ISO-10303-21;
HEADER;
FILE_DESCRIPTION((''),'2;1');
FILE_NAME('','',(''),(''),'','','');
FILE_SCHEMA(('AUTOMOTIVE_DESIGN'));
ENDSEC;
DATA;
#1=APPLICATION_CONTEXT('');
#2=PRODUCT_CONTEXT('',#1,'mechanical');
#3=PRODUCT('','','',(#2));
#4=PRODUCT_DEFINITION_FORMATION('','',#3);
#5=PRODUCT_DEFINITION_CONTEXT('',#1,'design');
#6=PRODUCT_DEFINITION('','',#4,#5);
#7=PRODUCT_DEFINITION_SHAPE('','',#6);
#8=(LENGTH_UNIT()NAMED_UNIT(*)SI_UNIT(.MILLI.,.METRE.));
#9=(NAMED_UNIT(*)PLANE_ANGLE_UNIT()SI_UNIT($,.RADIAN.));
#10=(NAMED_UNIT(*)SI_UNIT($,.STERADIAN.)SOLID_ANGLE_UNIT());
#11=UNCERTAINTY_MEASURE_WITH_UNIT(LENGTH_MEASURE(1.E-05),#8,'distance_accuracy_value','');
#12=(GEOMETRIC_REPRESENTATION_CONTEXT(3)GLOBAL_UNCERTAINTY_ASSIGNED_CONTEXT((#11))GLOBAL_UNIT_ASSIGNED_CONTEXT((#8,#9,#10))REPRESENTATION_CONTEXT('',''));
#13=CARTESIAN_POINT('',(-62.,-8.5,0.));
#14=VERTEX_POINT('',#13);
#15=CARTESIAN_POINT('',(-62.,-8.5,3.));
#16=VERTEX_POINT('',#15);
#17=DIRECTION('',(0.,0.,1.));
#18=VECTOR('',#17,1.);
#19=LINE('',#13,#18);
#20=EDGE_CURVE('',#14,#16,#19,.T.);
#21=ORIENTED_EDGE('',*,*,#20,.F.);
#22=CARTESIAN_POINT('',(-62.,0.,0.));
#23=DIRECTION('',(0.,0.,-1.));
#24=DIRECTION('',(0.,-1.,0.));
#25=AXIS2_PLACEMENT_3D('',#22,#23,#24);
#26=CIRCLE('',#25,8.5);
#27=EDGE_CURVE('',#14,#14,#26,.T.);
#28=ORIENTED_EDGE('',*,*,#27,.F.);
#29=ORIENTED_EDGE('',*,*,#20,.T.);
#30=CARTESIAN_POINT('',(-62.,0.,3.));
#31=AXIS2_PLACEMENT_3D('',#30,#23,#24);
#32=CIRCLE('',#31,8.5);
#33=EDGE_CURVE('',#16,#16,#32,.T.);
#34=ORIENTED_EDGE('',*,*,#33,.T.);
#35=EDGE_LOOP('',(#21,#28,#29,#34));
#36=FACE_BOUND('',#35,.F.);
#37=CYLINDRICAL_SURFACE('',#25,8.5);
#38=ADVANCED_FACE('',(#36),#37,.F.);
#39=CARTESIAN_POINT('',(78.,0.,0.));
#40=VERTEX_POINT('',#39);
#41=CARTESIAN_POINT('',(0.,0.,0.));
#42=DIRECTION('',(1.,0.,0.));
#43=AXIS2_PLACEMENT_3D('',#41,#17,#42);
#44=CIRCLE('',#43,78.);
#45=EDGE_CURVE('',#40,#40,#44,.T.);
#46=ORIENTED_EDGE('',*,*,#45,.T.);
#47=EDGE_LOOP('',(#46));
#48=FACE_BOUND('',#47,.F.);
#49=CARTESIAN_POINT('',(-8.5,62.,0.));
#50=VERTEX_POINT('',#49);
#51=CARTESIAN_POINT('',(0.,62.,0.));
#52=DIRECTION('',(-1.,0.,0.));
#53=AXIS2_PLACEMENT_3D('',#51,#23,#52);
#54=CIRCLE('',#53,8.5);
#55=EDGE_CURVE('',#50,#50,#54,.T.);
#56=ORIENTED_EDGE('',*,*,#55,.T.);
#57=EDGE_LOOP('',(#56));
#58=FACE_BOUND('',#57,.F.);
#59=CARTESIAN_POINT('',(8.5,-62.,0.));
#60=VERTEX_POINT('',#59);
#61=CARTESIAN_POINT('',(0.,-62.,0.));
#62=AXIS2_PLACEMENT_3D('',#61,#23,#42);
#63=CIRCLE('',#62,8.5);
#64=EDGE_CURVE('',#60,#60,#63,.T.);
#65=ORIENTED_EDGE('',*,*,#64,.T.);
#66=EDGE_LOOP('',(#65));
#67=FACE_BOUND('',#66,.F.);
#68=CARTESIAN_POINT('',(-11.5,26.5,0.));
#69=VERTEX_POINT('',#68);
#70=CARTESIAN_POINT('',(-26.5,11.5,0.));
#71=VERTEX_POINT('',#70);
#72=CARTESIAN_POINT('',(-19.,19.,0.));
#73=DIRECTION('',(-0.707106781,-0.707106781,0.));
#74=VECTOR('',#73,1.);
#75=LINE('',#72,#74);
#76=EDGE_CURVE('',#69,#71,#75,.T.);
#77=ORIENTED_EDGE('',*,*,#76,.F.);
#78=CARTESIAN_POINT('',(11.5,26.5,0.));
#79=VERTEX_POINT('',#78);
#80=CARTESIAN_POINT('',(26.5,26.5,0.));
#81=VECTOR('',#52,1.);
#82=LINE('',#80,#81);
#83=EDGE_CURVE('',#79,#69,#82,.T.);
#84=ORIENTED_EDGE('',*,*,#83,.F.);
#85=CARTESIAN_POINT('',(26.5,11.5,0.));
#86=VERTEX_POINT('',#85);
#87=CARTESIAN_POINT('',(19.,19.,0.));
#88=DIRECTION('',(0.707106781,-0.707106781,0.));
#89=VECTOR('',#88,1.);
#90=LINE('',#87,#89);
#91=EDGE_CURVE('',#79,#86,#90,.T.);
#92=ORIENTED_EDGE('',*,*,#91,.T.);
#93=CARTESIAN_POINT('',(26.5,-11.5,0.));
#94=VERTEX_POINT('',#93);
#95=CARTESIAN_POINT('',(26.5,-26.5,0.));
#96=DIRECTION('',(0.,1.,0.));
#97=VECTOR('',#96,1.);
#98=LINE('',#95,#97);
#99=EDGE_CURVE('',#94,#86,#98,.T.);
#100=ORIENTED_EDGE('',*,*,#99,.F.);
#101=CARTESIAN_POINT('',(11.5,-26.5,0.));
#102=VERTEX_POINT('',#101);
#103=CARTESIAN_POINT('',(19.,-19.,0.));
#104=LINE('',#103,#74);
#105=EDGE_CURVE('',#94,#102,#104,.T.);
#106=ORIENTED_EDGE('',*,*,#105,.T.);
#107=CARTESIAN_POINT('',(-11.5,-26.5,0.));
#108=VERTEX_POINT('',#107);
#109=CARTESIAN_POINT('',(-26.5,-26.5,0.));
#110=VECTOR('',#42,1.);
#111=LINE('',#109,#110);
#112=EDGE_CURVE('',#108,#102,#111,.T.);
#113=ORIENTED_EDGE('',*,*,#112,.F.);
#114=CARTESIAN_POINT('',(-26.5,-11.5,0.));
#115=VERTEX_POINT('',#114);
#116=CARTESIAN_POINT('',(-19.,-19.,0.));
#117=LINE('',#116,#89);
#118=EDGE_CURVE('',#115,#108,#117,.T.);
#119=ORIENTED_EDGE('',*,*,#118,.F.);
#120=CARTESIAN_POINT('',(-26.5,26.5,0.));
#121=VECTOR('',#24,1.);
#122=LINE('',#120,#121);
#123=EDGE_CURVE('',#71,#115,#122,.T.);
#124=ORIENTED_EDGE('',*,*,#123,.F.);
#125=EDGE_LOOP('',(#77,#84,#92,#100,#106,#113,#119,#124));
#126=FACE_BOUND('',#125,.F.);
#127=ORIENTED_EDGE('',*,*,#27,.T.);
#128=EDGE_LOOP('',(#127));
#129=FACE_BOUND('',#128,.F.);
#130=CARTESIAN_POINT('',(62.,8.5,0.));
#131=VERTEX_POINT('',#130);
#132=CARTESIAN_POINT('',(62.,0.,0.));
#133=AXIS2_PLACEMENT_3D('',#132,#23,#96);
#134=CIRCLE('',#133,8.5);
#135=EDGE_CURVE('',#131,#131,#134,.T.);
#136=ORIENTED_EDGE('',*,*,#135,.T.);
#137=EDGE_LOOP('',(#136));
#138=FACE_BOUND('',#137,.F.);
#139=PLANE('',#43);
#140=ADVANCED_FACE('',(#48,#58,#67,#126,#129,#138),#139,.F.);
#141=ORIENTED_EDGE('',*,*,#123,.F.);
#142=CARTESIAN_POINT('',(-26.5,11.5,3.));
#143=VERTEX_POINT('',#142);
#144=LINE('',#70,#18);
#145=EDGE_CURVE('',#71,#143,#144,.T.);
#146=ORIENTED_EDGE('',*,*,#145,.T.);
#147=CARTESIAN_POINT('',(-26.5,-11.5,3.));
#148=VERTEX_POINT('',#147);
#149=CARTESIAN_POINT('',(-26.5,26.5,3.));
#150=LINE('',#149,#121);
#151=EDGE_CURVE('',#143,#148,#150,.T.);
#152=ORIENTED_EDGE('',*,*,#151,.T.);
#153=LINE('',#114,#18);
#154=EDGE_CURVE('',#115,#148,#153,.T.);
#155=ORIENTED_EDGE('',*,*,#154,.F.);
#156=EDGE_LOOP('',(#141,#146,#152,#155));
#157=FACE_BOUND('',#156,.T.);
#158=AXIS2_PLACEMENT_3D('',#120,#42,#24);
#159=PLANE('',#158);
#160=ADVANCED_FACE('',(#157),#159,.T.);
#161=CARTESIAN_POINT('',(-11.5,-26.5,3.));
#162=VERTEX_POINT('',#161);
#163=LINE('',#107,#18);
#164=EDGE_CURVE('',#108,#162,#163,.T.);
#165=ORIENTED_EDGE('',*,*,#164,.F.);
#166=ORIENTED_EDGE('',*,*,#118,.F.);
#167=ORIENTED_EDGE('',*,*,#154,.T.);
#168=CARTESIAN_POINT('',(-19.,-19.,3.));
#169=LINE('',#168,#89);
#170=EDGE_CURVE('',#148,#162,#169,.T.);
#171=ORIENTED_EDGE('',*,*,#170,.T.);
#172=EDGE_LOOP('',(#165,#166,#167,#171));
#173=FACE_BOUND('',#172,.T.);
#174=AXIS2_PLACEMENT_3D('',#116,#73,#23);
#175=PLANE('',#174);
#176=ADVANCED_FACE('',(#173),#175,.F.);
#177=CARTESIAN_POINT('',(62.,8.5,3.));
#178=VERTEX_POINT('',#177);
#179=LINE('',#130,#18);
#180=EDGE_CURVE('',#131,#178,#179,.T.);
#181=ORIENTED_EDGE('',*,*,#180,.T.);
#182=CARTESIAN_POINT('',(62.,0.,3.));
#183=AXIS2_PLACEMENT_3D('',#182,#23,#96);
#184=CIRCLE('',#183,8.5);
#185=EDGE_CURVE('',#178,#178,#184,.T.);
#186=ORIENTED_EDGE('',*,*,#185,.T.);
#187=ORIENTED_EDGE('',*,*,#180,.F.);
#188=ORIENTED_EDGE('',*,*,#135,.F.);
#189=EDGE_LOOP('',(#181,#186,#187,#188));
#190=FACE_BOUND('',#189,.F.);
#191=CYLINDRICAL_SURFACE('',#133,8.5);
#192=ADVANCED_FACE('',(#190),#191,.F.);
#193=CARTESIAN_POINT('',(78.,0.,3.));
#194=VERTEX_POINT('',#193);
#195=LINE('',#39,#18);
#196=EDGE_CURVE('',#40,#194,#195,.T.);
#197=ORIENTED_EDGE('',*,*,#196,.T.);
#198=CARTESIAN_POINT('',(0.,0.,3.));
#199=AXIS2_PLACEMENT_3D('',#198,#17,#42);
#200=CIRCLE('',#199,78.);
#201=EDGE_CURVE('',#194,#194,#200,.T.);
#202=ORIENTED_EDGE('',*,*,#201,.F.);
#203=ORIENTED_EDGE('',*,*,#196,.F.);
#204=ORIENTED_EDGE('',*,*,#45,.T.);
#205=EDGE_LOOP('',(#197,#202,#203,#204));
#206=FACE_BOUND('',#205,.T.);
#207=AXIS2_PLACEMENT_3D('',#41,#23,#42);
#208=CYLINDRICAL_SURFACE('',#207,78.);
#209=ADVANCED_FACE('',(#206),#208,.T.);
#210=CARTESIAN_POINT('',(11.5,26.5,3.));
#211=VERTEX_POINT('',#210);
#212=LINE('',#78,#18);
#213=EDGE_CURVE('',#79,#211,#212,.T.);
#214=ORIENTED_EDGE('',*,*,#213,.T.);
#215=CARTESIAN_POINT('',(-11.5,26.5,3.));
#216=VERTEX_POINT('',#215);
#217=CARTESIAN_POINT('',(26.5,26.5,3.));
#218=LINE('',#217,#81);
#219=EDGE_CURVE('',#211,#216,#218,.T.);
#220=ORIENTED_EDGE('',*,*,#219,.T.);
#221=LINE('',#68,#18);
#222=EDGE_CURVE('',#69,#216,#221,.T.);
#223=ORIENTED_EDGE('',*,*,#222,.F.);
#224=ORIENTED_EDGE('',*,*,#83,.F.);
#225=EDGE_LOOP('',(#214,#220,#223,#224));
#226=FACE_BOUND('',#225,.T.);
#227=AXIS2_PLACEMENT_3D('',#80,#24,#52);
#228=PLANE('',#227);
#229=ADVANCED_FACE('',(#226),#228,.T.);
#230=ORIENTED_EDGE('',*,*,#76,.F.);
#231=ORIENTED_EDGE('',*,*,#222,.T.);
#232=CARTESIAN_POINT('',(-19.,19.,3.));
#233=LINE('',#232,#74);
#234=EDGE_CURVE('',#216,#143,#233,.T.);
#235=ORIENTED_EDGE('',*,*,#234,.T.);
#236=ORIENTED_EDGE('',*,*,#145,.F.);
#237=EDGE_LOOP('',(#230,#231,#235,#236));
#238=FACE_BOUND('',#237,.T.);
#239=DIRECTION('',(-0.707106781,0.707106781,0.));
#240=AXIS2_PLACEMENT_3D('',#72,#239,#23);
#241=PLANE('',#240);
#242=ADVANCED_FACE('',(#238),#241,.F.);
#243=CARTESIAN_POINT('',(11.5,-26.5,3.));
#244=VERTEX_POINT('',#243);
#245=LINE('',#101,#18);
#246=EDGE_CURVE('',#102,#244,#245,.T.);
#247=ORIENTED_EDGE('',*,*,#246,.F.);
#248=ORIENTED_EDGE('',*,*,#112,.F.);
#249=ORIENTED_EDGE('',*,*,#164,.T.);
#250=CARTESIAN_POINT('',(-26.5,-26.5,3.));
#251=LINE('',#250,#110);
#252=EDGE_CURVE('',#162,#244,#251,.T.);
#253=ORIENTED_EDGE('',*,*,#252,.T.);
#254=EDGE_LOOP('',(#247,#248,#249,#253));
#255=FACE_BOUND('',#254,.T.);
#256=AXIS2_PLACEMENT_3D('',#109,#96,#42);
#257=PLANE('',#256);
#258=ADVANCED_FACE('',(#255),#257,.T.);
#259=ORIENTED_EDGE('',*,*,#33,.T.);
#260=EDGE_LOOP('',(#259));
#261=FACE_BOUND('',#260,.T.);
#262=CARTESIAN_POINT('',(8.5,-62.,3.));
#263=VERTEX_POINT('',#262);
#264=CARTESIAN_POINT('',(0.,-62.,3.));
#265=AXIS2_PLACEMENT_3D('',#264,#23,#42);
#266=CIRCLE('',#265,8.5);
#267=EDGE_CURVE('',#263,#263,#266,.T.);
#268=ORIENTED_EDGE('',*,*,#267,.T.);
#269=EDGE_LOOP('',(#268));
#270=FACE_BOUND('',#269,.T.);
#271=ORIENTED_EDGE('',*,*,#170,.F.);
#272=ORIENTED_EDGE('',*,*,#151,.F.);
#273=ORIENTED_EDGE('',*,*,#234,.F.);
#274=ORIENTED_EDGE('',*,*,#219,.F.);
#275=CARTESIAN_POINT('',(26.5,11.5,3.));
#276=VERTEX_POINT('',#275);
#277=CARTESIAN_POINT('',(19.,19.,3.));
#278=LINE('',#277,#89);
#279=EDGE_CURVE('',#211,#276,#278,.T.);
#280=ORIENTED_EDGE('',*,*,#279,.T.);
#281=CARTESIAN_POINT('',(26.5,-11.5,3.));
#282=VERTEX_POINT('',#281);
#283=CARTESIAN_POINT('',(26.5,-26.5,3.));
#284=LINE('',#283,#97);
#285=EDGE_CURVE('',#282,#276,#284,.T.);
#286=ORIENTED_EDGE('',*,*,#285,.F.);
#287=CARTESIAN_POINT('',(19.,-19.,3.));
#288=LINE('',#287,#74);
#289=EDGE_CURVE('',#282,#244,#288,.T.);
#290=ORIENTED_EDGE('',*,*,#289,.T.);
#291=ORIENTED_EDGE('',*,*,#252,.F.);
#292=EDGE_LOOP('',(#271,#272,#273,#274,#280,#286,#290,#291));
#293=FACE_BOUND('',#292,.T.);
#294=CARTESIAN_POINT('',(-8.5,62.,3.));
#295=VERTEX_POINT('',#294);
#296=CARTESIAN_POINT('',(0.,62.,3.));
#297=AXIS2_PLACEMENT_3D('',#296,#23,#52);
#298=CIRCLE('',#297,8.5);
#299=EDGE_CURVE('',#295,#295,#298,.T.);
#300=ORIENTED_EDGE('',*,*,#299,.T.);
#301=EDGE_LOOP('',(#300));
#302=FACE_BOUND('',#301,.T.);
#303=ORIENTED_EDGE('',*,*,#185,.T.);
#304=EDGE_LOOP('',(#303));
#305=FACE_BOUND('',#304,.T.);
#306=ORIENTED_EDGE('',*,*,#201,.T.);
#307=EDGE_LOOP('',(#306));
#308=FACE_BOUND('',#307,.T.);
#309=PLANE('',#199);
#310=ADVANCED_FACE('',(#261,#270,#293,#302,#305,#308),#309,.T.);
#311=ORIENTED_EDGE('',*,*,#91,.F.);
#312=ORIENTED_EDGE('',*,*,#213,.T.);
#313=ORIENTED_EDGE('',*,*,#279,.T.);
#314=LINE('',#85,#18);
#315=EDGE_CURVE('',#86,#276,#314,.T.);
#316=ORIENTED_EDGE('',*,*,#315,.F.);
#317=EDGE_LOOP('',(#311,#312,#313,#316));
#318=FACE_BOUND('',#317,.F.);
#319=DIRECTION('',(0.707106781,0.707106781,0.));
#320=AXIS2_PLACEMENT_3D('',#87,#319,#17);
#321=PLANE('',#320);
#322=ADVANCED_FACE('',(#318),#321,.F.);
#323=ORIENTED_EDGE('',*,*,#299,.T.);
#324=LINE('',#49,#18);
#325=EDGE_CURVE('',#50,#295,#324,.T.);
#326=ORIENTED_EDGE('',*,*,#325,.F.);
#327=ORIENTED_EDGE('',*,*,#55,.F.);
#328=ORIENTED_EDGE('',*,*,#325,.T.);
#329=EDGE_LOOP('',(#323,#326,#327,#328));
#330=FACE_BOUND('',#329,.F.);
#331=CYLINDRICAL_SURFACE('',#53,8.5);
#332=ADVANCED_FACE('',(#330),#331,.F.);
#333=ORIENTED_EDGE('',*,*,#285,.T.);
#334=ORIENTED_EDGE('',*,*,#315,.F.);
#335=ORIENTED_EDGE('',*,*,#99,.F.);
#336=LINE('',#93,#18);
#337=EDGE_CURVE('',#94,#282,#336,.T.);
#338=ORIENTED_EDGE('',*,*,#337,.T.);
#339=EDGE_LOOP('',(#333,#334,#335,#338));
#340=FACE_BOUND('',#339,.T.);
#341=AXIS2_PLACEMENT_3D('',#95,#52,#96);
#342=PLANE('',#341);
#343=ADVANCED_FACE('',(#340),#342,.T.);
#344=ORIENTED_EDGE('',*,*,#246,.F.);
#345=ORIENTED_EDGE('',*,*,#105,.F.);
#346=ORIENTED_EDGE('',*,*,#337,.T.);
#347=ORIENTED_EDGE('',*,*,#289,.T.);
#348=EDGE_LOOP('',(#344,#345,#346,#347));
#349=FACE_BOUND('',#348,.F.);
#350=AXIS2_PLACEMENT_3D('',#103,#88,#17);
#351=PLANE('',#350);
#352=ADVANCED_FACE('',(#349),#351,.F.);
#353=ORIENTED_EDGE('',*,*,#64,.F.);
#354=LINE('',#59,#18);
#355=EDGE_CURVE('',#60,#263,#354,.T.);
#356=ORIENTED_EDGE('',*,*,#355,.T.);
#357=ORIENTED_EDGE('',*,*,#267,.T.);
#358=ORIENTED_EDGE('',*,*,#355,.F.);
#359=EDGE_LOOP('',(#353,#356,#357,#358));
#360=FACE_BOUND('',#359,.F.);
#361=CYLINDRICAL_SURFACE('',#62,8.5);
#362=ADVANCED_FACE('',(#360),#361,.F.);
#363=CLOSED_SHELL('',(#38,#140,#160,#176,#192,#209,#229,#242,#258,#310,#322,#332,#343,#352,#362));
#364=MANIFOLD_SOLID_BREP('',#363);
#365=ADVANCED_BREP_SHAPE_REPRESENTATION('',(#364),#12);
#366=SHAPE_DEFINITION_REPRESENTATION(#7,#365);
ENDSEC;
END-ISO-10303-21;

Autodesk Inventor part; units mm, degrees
ref_plane "YZ Plane" through (0, 0, 0) normal (1, 0, 0) x (0, 1, 0)
ref_plane "XZ Plane" through (0, 0, 0) normal (0, 1, 0) x (-1, 0, 0)
ref_plane "XY Plane" through (0, 0, 0) normal (0, 0, 1) x (1, 0, 0)
sketch "Sketch1" plane through (0, 0, 0) normal (0, 0, 1) x (1, 0, 0)
  circle A0 centre (0, 0) radius 78
  line L0 (26.5, 26.5) -> (-26.5, 26.5)
  line L1 (-26.5, 26.5) -> (-26.5, -26.5)
  line L2 (-26.5, -26.5) -> (26.5, -26.5)
  line L3 (26.5, -26.5) -> (26.5, 26.5)
  line L4 (26.5, 26.5) -> (-26.5, -26.5) construction
  line L5 (-26.5, 26.5) -> (26.5, -26.5) construction
  dimension "d157" = 156
  dimension "d158" = 53
  dimension "d159" = 53
extrude "Plate5" add sketch "Sketch1" along normal blind 3
sketch "Sketch7" plane through (0, 0, 0) normal (0, 0, -1) x (-1, 0, 0)
  circle A0 centre (0, 62) radius 8.5
  point P0 (0, 0)
  dimension "d160" = 17
  dimension "d161" = 62
extrude "Cut1" cut sketch "Sketch7" against normal blind 3
pattern_circular "Circular Pattern1" count 4 over 360 about axis through (0, 0, -10) along (0, 0, 1) of "Cut1"
chamfer "Corner Chamfer2" distance 15 angle 45 4 edges at (-26.5, -26.5, 1.5) (26.5, -26.5, 1.5) (-26.5, 26.5, 1.5) (26.5, 26.5, 1.5)
properties part number "ANP 1392  funnel FLANGE 1400 50-90" material "Stainless Steel"
